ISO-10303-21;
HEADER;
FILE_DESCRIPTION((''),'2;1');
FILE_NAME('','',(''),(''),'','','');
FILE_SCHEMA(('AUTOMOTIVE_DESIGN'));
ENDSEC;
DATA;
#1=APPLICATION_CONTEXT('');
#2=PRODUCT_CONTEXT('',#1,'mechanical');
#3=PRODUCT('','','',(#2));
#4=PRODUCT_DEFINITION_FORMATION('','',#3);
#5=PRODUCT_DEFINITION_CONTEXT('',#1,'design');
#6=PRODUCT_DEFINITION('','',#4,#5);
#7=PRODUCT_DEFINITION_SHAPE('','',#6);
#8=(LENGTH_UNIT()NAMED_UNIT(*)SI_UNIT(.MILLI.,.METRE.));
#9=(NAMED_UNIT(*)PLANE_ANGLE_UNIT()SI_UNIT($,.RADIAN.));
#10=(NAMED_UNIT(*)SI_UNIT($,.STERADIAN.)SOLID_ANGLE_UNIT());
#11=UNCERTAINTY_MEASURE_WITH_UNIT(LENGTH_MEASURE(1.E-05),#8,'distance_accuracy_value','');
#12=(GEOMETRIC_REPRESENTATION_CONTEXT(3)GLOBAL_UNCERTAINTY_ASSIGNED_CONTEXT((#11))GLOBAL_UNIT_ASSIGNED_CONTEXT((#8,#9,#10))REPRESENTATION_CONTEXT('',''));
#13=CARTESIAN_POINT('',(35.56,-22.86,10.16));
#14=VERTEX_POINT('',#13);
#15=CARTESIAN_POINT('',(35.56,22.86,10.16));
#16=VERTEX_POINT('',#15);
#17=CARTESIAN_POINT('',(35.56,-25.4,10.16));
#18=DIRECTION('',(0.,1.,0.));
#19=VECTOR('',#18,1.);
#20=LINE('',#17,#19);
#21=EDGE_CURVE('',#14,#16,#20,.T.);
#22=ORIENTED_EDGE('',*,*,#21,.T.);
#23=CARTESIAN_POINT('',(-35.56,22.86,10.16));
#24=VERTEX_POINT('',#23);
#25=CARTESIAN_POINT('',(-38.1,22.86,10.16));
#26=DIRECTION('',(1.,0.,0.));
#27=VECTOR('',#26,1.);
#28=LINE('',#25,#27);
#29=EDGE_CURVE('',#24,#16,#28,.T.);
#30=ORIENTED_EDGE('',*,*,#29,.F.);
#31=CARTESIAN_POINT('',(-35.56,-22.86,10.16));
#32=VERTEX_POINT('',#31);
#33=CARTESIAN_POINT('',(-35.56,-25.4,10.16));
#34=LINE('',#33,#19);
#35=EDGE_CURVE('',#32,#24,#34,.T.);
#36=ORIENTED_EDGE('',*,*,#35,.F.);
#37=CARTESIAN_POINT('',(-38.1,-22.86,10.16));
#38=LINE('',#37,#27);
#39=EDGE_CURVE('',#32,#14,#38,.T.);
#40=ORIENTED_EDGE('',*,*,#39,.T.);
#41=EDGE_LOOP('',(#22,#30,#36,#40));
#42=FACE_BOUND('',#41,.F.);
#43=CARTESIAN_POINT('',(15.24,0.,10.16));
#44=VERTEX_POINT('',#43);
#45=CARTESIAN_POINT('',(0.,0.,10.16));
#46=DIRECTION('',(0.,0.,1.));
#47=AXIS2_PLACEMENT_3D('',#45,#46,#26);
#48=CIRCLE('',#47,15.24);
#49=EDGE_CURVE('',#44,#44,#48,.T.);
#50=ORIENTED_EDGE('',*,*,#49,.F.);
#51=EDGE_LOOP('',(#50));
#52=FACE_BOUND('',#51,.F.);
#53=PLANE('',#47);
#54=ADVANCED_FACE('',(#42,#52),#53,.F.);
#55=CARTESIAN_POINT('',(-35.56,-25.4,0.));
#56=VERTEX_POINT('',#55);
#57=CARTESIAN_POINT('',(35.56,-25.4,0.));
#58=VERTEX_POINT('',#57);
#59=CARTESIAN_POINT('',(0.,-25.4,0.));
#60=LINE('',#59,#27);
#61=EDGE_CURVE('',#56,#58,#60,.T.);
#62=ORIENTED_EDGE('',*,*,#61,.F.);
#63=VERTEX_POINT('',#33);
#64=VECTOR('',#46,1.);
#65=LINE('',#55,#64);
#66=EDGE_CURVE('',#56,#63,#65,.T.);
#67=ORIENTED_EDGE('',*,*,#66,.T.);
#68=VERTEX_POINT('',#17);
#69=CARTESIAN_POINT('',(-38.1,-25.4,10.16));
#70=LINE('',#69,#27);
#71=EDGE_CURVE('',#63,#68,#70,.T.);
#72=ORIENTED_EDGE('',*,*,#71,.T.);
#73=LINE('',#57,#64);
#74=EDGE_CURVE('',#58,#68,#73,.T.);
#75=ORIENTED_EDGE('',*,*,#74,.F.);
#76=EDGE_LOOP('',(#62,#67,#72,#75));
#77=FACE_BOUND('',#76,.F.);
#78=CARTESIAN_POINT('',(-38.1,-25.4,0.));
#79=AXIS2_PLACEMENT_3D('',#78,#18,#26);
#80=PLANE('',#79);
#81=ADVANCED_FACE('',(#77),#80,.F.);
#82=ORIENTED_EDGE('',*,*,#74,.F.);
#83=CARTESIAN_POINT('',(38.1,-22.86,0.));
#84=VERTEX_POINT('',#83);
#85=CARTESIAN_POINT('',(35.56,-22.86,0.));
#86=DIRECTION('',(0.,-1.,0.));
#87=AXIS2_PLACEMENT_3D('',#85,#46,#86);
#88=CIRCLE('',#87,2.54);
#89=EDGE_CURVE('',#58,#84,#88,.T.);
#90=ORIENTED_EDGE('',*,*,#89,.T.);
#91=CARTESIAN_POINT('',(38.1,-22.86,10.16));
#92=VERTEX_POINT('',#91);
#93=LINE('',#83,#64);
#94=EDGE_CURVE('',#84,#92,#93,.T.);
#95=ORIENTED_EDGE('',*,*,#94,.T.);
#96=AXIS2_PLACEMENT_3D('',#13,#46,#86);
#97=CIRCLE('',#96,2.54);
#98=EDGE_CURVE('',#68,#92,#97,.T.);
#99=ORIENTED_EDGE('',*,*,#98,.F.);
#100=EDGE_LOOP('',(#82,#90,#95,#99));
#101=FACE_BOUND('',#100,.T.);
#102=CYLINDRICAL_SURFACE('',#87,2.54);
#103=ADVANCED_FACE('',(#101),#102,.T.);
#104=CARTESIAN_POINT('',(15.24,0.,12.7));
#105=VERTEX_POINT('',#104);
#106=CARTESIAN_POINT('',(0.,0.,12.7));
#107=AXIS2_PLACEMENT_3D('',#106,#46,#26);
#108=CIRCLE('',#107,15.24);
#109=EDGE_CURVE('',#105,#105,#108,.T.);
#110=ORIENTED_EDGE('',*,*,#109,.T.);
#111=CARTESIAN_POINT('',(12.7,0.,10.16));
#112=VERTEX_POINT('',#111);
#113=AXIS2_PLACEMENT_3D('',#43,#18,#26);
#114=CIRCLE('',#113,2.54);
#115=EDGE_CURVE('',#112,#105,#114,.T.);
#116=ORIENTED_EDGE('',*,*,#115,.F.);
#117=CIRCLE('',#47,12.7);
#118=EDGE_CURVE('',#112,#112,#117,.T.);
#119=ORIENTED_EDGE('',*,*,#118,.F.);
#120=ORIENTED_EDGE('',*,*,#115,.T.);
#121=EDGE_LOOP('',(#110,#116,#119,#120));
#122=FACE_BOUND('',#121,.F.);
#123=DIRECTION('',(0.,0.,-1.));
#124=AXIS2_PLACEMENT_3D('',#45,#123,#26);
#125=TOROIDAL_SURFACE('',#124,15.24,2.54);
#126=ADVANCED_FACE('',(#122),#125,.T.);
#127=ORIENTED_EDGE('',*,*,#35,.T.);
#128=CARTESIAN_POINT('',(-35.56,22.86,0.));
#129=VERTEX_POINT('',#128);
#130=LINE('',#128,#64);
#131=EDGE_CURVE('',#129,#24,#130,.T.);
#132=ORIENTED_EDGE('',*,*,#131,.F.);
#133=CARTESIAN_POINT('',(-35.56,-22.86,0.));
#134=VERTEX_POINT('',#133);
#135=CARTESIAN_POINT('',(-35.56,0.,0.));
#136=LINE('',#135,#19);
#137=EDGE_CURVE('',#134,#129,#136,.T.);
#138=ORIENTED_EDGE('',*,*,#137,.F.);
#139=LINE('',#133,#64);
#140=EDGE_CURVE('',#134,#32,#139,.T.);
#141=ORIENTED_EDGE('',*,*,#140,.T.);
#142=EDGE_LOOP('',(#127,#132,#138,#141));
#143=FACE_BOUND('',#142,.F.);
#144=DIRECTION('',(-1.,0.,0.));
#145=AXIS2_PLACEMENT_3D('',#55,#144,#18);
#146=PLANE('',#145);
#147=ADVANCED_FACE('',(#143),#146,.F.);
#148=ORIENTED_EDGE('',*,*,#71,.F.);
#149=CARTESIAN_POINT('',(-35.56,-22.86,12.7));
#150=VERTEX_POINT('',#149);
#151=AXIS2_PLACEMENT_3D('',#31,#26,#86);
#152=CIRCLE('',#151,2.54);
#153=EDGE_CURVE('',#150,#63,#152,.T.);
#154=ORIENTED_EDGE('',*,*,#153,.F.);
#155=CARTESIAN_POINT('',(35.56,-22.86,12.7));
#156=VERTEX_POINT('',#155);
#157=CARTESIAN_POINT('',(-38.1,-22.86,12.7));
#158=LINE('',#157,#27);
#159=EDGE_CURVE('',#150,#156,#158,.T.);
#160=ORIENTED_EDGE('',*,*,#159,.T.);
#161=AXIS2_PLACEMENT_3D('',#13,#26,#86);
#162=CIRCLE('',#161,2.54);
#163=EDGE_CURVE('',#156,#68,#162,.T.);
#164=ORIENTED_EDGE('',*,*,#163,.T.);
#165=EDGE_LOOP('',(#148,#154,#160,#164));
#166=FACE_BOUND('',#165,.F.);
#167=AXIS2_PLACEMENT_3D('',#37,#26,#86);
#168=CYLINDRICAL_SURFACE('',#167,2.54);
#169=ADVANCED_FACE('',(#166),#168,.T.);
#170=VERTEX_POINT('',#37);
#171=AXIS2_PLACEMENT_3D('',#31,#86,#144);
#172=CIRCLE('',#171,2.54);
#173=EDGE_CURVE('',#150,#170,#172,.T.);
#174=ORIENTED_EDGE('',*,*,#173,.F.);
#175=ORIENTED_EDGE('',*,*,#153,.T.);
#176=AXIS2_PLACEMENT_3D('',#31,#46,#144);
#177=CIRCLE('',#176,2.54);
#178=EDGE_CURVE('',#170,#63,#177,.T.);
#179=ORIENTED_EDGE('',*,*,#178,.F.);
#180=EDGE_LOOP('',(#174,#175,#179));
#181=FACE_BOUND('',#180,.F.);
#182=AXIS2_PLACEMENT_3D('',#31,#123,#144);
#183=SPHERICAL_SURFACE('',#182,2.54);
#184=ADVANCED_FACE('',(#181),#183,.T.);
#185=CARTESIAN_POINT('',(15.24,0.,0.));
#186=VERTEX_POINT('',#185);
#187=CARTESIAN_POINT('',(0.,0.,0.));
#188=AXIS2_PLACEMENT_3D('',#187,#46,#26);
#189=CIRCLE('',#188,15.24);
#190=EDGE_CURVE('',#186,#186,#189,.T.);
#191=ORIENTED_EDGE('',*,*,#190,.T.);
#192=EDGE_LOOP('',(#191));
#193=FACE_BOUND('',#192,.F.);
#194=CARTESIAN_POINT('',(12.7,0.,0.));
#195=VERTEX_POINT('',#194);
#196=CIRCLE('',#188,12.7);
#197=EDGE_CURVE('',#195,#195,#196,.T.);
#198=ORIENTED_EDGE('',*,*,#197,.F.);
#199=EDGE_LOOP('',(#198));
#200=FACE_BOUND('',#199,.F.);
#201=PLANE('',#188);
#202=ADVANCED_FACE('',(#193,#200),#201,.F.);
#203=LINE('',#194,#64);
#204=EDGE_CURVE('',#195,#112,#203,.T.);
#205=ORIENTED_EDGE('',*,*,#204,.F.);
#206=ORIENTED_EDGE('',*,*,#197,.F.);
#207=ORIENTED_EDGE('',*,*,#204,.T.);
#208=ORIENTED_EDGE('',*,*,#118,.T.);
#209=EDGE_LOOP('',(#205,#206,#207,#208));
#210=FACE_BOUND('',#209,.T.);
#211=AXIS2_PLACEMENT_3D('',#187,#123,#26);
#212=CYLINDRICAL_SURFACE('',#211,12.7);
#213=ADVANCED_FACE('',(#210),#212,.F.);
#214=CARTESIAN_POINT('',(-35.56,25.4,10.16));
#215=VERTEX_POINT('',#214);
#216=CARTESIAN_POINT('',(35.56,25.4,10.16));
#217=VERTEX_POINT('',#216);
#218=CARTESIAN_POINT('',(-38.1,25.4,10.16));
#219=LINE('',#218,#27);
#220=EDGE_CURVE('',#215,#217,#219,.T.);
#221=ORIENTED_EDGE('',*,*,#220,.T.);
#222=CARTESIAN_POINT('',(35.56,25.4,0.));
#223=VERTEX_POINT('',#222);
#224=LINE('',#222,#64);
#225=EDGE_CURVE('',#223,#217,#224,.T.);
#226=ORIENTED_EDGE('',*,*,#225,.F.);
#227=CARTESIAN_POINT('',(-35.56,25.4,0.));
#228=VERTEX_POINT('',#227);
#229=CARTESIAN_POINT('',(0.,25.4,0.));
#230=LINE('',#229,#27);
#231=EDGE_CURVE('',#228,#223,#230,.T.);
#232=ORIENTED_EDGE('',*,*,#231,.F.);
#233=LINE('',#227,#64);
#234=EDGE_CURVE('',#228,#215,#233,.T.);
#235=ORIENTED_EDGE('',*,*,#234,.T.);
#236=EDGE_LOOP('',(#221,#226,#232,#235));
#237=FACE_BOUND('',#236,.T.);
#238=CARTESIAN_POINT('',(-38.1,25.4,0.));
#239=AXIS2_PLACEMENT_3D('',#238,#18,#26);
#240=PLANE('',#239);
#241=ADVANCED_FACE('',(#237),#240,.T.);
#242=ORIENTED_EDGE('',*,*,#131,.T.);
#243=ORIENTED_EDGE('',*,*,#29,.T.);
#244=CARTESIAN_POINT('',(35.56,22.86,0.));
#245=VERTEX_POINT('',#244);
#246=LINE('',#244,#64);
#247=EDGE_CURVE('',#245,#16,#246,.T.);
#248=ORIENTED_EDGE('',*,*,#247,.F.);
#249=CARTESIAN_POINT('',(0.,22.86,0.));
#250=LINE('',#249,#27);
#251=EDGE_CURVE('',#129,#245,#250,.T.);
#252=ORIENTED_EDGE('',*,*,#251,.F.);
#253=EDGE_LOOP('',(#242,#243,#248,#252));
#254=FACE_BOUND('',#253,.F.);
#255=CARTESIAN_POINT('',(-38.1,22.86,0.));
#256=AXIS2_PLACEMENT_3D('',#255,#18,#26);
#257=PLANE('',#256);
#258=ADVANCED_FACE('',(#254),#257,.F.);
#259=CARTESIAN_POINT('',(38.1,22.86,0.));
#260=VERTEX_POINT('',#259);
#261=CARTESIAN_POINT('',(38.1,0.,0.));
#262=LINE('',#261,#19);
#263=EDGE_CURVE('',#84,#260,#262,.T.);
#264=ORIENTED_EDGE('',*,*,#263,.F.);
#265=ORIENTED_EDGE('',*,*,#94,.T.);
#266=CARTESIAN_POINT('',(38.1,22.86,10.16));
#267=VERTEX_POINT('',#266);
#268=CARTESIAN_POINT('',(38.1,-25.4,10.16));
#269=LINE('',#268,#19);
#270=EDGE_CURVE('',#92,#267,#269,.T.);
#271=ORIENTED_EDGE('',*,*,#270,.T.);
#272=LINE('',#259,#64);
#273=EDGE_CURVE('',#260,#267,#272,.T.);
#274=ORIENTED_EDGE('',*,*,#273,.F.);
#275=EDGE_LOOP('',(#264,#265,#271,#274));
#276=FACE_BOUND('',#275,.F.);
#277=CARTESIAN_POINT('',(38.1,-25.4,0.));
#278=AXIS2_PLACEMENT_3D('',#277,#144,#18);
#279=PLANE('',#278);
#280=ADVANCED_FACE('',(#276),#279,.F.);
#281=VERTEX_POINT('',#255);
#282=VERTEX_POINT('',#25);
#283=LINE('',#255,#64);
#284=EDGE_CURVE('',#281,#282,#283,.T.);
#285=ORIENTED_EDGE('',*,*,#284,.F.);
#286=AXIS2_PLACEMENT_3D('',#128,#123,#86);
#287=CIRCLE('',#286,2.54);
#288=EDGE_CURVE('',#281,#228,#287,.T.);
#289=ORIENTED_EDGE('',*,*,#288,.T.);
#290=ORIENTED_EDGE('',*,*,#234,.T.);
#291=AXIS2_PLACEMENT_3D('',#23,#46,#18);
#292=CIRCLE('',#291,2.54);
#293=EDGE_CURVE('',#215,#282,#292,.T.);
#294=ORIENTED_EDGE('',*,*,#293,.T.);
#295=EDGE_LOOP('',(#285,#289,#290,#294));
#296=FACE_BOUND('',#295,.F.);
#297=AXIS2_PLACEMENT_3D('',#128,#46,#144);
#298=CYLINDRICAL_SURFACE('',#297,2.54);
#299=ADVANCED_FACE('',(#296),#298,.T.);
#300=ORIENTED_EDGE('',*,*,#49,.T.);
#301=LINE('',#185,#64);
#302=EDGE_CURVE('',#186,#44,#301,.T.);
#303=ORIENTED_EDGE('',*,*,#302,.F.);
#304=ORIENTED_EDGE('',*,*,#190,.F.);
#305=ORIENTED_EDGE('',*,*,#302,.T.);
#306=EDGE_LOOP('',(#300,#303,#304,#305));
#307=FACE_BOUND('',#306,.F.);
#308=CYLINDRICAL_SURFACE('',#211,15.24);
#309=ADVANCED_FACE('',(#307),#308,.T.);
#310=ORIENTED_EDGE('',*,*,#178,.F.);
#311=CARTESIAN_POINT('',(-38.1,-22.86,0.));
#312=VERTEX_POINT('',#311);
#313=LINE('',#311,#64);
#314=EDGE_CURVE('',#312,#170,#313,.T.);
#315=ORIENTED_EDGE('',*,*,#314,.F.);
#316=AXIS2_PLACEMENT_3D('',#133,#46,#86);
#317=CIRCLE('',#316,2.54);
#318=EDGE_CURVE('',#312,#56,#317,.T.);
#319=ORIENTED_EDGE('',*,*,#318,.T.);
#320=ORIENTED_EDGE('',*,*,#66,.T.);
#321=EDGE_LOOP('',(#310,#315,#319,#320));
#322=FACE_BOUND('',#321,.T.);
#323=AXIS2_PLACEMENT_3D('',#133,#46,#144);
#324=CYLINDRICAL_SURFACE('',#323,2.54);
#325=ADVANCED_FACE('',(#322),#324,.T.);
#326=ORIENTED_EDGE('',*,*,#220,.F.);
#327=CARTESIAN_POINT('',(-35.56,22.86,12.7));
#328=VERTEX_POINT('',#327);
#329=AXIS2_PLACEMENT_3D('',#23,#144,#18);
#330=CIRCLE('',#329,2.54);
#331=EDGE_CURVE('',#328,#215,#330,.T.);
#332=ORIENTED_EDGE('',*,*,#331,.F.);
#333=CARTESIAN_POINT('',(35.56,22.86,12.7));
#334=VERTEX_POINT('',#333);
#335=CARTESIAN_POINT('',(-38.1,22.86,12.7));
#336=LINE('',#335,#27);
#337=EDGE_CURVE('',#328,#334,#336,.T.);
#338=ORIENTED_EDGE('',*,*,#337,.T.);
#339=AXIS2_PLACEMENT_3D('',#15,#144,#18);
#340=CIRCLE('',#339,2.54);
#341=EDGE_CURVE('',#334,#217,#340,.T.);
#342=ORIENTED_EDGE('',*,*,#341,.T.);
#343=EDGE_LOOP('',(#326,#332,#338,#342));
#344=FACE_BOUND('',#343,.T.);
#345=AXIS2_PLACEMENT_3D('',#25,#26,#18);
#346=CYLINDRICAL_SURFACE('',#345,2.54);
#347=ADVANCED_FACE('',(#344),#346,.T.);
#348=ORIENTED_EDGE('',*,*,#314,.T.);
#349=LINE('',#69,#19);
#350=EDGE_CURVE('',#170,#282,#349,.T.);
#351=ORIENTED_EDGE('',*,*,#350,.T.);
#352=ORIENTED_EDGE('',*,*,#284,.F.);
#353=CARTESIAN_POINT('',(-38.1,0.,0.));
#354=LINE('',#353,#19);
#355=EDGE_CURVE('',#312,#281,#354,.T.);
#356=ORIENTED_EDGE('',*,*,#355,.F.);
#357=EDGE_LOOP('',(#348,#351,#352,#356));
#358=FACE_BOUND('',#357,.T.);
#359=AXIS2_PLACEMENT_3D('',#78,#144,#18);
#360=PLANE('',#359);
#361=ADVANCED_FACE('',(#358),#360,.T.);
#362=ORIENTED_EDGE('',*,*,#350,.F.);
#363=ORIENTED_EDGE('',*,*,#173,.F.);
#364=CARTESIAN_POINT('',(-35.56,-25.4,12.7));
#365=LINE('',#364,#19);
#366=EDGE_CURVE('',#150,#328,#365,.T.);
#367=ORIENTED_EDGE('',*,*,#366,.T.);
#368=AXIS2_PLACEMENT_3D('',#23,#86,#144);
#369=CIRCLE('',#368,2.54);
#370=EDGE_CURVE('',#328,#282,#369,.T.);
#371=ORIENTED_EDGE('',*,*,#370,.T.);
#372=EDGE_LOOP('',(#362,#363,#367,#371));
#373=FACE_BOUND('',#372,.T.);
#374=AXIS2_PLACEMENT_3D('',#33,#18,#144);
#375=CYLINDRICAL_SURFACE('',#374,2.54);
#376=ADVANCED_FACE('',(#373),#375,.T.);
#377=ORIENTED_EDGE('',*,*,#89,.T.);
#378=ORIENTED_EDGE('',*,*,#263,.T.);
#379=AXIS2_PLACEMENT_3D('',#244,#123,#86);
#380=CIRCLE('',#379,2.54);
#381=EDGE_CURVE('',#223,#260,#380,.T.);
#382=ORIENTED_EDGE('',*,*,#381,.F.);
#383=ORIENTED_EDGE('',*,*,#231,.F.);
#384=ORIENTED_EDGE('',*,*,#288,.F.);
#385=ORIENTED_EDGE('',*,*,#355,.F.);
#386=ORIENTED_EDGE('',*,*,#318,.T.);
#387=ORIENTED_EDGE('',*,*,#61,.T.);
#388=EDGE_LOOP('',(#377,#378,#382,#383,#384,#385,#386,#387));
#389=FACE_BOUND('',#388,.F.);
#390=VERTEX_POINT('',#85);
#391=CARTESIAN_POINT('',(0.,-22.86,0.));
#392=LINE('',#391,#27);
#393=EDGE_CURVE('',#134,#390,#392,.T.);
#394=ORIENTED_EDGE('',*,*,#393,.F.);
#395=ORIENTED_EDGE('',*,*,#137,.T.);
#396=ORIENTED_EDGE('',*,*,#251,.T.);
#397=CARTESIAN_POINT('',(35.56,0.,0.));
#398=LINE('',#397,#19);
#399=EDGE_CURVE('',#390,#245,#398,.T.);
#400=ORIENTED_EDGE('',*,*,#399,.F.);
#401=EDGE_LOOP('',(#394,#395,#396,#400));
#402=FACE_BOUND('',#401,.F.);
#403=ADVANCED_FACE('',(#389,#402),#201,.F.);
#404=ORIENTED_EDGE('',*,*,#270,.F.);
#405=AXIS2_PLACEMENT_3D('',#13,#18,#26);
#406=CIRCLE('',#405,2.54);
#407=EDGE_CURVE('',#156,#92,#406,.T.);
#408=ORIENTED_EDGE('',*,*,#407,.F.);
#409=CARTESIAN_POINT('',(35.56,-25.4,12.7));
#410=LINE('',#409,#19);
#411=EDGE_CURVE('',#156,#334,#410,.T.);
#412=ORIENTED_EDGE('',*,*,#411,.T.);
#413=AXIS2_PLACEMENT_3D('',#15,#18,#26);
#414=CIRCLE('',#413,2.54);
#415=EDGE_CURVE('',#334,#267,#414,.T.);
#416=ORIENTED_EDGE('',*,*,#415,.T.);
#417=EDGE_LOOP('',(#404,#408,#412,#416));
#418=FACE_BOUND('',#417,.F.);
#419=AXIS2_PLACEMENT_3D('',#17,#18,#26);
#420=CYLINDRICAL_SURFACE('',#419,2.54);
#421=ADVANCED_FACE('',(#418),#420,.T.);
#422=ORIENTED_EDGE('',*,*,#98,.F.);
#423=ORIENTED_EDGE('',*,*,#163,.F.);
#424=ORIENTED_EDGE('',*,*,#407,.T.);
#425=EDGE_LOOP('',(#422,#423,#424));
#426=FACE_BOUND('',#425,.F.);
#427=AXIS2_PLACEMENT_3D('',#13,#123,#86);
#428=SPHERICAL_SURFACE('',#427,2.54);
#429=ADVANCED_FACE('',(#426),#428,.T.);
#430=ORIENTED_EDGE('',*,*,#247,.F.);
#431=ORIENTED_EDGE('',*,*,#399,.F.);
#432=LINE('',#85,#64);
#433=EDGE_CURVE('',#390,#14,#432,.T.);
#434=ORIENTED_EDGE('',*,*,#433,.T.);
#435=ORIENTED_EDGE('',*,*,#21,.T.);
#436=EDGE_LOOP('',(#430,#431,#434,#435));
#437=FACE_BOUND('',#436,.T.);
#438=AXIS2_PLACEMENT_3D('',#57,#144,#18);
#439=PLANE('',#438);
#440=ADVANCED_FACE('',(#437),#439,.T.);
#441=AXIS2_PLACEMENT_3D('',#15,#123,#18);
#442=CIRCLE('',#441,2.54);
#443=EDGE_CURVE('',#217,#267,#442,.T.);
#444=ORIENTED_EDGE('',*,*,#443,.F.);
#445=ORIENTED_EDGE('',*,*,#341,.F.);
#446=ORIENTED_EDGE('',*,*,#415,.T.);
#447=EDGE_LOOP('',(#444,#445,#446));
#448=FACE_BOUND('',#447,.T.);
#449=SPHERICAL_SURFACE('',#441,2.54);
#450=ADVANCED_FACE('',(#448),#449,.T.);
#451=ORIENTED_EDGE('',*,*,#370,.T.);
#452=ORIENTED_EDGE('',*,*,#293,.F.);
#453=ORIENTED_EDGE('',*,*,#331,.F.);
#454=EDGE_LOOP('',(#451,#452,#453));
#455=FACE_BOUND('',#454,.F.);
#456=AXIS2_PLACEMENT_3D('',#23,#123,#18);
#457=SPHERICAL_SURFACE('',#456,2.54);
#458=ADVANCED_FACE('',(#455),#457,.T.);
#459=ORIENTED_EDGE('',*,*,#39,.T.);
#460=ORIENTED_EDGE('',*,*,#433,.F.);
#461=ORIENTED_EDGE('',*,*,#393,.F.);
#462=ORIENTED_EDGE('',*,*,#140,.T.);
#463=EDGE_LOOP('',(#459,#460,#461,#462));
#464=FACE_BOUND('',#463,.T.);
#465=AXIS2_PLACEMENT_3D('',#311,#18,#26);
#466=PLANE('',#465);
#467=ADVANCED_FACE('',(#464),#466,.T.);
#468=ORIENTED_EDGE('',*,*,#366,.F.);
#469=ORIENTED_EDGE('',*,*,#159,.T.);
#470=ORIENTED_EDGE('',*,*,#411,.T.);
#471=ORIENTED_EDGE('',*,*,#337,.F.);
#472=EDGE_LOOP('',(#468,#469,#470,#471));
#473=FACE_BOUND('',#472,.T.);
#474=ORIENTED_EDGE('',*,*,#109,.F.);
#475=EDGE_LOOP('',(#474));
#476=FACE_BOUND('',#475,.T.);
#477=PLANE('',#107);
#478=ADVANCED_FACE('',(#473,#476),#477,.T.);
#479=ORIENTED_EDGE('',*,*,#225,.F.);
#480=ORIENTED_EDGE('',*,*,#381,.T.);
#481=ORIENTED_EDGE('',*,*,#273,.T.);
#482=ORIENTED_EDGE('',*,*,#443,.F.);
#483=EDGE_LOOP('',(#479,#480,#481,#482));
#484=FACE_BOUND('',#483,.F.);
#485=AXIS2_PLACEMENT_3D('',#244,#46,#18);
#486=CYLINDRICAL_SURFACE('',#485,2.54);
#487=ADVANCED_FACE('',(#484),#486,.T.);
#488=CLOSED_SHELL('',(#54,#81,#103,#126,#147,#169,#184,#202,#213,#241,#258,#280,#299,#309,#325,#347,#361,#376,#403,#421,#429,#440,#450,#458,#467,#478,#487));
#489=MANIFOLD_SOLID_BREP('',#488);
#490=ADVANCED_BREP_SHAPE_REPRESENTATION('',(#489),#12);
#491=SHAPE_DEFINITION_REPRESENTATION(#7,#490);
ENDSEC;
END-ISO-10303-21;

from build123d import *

# Parameters (mm, degrees)
F0_W     = 76.2
F0_H     = 50.8
F0_R     = 12.7
F1_DEPTH = 12.7
F2_R     = 2.54
F3_T     = 2.54


# Not quite as in the source:
# - a shell that OpenCascade refuses in one call is made with other operations: the cavity is built on its own and cut out


with BuildPart() as f1:
    # F0 (on Top) → F1 (new body)
    with BuildSketch(Plane.XY):
        Rectangle(F0_W, F0_H)
        Circle(F0_R, mode=Mode.SUBTRACT)
    extrude(amount=F1_DEPTH)

    # F2
    f2_edges = [f1.edges().sort_by_distance(p)[0] for p in [
        (-38.1, -25.4, 6.35),
        (38.1, -25.4, 6.35),
        (38.1, 25.4, 6.35),
        (-38.1, 25.4, 6.35),
        (0, 25.4, 12.7),
        (-38.1, 0, 12.7),
        (0, -25.4, 12.7),
        (38.1, 0, 12.7),
        (-12.7, 0, 12.7),
    ]]
    fillet(f2_edges, radius=F2_R)

    # F3: shell of thickness 2.54, made by hand


with BuildPart() as f3_core1:
    # F3_t2: copy of F1
    add(f1.part)

    # the walls: a layer under each face that stays
    f3_faces = [f3_core1.faces().sort_by_distance(p)[0] for p in [
        (38.1, 0, 5.08),
        (0, -25.4, 5.08),
        (0, 25.4, 5.08),
        (-38.1, 0, 5.08),
        (-12.7, 0, 5.08),
        (-23.7066666667, -15.24, 12.7),
    ]]
    thicken(f3_faces, amount=-F3_T, mode=Mode.SUBTRACT)


with BuildPart() as f1_1:
    add(f1.part)

    # what is left inside the walls is the cavity
    f3_cavity = [f3_core1.part.solids().sort_by_distance(p)[0] for p in [
        (-17.78, 7.62, 0.0254),
    ]]
    add(f3_cavity, mode=Mode.SUBTRACT)


solid = f1_1.part
